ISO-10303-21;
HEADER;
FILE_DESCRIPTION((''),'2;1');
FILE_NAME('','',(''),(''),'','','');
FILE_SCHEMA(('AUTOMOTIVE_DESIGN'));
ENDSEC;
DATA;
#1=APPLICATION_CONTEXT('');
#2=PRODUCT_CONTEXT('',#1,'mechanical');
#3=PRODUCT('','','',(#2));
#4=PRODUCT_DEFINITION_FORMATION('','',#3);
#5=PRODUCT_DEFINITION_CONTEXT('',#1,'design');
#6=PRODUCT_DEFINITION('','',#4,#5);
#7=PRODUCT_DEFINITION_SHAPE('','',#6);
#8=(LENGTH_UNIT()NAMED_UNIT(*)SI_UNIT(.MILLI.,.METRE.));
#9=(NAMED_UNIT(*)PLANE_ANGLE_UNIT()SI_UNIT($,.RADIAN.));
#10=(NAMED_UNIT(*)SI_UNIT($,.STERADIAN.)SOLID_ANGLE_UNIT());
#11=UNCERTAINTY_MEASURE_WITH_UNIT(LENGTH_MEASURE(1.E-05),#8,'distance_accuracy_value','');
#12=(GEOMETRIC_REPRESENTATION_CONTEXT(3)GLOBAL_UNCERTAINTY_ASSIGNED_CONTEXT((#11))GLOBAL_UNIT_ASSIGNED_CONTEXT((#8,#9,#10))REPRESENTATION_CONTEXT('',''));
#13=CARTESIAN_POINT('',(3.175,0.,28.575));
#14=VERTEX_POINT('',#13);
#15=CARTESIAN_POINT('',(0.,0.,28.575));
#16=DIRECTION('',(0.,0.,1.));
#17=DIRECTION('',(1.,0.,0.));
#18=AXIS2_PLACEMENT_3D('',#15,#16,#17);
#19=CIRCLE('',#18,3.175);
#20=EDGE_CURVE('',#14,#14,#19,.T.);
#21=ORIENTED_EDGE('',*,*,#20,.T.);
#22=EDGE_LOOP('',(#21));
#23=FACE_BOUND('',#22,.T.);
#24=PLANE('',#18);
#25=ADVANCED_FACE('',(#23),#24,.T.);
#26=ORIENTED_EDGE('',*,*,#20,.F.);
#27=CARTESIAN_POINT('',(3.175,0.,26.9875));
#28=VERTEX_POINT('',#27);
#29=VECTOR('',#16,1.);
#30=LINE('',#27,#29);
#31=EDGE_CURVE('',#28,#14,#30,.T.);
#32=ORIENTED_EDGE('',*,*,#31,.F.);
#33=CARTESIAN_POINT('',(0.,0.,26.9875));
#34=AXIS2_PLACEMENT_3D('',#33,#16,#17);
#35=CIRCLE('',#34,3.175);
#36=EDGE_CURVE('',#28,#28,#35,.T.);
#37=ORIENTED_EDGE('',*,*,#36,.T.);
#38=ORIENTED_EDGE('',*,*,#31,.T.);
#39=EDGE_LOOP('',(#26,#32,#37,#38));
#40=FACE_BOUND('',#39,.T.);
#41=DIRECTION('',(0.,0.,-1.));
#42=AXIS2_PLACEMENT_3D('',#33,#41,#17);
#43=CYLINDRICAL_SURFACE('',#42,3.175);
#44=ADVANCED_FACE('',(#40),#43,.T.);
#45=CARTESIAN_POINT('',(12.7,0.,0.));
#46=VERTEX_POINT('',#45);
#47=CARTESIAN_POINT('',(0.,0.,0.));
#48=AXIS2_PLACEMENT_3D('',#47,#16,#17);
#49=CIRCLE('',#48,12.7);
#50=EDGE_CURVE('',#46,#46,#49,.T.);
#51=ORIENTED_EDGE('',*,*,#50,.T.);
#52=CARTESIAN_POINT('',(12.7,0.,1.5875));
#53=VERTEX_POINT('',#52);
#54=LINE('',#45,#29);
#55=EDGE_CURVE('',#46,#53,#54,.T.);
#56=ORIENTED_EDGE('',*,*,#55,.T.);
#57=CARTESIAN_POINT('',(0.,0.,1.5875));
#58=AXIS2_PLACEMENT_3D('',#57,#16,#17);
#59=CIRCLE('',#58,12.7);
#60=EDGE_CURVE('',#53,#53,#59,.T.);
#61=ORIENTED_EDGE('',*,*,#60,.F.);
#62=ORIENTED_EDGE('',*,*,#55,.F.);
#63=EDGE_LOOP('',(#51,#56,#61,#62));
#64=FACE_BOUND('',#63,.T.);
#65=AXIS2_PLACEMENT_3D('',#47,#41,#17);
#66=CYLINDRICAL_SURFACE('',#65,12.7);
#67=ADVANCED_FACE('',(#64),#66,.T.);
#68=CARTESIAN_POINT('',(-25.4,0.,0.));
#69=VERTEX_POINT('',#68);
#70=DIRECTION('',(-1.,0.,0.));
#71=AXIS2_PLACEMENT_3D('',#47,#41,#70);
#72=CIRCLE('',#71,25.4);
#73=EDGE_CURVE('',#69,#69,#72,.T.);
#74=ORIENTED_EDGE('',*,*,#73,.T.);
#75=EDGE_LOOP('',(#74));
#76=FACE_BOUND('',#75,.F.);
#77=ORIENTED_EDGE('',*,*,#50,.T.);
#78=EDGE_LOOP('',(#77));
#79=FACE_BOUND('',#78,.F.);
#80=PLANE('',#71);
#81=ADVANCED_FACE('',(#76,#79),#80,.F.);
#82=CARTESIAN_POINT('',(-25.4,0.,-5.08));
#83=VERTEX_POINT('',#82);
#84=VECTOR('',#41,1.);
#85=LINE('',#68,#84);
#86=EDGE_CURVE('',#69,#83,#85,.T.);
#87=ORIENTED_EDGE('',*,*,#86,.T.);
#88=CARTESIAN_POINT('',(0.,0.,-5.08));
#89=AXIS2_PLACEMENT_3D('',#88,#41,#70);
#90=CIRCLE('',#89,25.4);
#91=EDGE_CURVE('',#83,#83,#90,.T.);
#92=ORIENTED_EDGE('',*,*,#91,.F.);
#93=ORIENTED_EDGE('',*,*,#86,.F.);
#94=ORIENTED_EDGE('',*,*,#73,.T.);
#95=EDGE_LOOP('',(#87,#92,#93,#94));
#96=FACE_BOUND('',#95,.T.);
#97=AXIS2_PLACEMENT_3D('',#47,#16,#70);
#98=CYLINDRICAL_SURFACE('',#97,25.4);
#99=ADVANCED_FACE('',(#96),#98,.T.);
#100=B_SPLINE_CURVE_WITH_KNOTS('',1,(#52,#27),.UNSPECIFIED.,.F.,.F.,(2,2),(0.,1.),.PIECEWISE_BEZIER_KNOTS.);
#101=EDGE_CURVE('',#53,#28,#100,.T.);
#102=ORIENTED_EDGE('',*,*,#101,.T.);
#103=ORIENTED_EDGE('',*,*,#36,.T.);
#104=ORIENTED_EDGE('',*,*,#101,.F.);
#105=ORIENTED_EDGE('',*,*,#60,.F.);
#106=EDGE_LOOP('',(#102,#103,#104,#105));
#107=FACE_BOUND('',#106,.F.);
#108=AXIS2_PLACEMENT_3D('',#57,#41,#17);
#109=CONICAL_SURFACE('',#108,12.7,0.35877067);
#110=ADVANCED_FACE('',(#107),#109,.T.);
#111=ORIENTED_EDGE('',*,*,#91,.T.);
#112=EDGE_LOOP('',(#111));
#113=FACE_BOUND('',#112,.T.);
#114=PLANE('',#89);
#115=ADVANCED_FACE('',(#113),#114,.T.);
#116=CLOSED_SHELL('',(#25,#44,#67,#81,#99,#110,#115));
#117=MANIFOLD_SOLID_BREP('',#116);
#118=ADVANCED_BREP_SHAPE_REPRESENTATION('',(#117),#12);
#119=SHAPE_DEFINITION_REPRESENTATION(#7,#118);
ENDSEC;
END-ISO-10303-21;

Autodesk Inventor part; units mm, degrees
ref_plane "YZ Plane" through (0, 0, 0) normal (1, 0, 0) x (0, 1, 0)
ref_plane "XZ Plane" through (0, 0, 0) normal (0, 1, 0) x (-1, 0, 0)
ref_plane "XY Plane" through (0, 0, 0) normal (0, 0, 1) x (1, 0, 0)
sketch "Sketch1" plane through (0, 0, 0) normal (0, 0, 1) x (1, 0, 0)
  circle A0 centre (0, 0) radius 12.7
  dimension "d0" = 25.4
extrude "Extrusion1" add sketch "Sketch1" along normal blind 1.5875
ref_plane "Work Plane1" through (0, 0, 26.9875) normal (0, 0, 1) x (1, 0, 0)
sketch "Sketch2" plane through (0, 0, 26.9875) normal (0, 0, 1) x (1, 0, 0)
  circle A0 centre (0, 0) radius 3.175
  dimension "d4" = 6.35
extrude "Extrusion2" add sketch "Sketch2" along normal blind 1.5875
loft "Loft1" add section 1 edges at (-12.7, 0, 1.5875) section 2 edges at (-3.175, 0, 26.9875)
sketch "Sketch3" plane through (0, 0, 0) normal (0, 0, -1) x (-1, 0, 0)
  circle A0 centre (0, 0) radius 25.4
  dimension "d11" = 50.8
extrude "Extrusion3" add sketch "Sketch3" along normal blind 5.08
sketch "Sketch5" plane through (0, 0, -5.08) normal (0, 0, -1) x (-1, 0, 0)
  point P0 (0, 0)
properties part number "Aerospike base"
